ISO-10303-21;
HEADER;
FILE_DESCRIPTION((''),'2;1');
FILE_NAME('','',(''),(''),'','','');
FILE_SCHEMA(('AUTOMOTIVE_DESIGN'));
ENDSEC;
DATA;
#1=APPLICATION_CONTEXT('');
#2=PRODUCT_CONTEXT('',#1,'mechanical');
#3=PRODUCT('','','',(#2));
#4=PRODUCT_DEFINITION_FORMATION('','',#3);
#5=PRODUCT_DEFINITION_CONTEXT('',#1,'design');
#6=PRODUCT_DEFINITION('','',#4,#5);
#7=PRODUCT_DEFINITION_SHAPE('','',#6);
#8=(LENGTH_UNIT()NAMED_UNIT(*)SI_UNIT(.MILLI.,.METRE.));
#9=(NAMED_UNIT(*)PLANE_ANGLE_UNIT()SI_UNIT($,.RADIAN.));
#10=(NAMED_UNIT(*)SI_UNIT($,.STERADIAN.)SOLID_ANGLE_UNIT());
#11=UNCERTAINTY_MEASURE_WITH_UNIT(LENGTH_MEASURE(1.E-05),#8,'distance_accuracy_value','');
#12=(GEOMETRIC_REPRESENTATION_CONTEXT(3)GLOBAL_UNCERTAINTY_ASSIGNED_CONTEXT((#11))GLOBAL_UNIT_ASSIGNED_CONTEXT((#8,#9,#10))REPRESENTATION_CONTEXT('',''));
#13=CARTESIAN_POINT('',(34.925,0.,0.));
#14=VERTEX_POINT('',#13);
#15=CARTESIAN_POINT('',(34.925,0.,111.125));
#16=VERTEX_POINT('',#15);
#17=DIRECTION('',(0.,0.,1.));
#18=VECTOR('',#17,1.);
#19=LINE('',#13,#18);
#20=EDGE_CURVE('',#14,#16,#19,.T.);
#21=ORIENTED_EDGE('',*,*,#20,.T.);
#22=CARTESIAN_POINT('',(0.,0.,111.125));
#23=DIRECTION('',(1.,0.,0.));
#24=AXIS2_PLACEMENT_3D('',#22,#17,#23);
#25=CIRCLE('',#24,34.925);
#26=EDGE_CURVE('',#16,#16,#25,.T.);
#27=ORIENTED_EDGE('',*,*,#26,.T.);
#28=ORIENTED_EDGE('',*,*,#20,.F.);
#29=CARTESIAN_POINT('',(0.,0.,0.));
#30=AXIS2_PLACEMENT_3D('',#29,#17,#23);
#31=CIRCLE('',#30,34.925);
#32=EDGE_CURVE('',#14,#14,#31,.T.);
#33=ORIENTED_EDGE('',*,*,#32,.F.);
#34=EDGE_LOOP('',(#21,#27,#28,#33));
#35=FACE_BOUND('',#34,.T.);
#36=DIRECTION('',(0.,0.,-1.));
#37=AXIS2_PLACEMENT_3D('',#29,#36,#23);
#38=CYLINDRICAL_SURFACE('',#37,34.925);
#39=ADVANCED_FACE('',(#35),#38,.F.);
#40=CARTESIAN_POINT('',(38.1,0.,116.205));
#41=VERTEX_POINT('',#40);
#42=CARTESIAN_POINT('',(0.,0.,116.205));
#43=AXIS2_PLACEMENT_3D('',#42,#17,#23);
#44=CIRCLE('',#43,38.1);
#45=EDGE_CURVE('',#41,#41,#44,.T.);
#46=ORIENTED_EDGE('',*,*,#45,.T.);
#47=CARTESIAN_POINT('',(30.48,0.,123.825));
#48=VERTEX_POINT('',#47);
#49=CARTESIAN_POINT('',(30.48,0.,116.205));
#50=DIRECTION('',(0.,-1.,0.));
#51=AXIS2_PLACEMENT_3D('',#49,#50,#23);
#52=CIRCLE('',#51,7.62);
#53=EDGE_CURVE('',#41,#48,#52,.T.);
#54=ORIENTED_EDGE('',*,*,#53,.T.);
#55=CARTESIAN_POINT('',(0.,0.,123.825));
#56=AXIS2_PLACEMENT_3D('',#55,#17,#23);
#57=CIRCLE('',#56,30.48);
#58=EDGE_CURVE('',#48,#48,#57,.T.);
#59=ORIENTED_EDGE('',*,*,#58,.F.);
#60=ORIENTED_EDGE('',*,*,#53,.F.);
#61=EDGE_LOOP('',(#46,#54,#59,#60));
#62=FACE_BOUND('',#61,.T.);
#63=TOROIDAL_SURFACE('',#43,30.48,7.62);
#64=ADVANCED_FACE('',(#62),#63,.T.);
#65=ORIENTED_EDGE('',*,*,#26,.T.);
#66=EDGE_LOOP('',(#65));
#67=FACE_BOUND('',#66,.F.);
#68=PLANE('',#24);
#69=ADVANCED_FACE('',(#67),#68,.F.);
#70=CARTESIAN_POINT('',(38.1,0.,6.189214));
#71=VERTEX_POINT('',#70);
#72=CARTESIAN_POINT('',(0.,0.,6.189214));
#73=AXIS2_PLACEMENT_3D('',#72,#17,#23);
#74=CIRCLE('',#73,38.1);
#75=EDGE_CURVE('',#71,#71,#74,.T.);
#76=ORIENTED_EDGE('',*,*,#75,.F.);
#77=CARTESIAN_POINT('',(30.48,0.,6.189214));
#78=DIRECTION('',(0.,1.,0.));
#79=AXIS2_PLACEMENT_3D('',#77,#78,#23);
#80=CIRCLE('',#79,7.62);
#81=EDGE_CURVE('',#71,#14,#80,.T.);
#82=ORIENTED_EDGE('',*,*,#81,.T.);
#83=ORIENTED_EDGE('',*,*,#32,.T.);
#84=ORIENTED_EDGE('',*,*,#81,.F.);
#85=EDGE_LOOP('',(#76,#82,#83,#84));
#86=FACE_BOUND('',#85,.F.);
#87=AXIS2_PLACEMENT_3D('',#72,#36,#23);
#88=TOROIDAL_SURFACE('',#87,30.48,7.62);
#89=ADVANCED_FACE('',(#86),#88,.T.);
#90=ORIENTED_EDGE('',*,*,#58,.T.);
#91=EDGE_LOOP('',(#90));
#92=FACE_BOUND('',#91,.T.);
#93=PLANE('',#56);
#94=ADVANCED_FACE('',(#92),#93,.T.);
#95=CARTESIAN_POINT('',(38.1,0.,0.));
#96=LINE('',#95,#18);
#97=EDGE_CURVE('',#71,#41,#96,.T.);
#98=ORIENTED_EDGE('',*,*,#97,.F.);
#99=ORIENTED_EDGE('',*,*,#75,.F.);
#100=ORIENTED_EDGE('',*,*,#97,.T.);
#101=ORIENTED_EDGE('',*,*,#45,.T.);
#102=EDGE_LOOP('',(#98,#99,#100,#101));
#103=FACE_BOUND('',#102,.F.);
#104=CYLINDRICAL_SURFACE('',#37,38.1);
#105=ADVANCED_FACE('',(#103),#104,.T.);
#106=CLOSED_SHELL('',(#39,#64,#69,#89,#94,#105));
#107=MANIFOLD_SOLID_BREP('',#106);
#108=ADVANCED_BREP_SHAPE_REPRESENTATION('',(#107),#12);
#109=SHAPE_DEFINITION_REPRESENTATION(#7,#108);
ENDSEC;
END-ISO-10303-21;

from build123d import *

# Parameters (mm, degrees)
F0_R     = 38.1
F1_DEPTH = 123.825
F2_R     = 34.925
F3_DEPTH = 111.125
F5_R     = 7.62


# Not quite as in the source:
# - a fillet or chamfer that OpenCascade refuses, or shapes differently, is made with other operations: its cross-section is extruded or revolved along the edge and cut away or added


with BuildPart() as f1:
    # F0 (on Top) → F1 (new body)
    with BuildSketch(Plane.XY):
        Circle(F0_R)
    extrude(amount=F1_DEPTH)

    # F2 (on Top) → F3 (cut)
    with BuildSketch(Plane.XY):
        Circle(F2_R)
    extrude(amount=F3_DEPTH, mode=Mode.SUBTRACT)

    # F4: fillet of radius 7.62 on 1 edges, made by hand

    # F4_s1 → F4_t2 (revolve, cut)
    with BuildSketch(Plane.XZ):
        with BuildLine():
            ThreePointArc((38.1, 6.189214409), (37.25994469, 2.7111761688), (34.925, 0))
            Line((34.925, 0), (38.1, 0))
            Line((38.1, 0), (38.1, 6.189214409))
        make_face()
    revolve(axis=Axis((0, 0, 0), (0, 0, 1)), mode=Mode.SUBTRACT)

    # F5
    f5_edges = [f1.edges().sort_by_distance(p)[0] for p in [
        (-38.1, 0, 123.825),
    ]]
    fillet(f5_edges, radius=F5_R)


solid = f1.part
